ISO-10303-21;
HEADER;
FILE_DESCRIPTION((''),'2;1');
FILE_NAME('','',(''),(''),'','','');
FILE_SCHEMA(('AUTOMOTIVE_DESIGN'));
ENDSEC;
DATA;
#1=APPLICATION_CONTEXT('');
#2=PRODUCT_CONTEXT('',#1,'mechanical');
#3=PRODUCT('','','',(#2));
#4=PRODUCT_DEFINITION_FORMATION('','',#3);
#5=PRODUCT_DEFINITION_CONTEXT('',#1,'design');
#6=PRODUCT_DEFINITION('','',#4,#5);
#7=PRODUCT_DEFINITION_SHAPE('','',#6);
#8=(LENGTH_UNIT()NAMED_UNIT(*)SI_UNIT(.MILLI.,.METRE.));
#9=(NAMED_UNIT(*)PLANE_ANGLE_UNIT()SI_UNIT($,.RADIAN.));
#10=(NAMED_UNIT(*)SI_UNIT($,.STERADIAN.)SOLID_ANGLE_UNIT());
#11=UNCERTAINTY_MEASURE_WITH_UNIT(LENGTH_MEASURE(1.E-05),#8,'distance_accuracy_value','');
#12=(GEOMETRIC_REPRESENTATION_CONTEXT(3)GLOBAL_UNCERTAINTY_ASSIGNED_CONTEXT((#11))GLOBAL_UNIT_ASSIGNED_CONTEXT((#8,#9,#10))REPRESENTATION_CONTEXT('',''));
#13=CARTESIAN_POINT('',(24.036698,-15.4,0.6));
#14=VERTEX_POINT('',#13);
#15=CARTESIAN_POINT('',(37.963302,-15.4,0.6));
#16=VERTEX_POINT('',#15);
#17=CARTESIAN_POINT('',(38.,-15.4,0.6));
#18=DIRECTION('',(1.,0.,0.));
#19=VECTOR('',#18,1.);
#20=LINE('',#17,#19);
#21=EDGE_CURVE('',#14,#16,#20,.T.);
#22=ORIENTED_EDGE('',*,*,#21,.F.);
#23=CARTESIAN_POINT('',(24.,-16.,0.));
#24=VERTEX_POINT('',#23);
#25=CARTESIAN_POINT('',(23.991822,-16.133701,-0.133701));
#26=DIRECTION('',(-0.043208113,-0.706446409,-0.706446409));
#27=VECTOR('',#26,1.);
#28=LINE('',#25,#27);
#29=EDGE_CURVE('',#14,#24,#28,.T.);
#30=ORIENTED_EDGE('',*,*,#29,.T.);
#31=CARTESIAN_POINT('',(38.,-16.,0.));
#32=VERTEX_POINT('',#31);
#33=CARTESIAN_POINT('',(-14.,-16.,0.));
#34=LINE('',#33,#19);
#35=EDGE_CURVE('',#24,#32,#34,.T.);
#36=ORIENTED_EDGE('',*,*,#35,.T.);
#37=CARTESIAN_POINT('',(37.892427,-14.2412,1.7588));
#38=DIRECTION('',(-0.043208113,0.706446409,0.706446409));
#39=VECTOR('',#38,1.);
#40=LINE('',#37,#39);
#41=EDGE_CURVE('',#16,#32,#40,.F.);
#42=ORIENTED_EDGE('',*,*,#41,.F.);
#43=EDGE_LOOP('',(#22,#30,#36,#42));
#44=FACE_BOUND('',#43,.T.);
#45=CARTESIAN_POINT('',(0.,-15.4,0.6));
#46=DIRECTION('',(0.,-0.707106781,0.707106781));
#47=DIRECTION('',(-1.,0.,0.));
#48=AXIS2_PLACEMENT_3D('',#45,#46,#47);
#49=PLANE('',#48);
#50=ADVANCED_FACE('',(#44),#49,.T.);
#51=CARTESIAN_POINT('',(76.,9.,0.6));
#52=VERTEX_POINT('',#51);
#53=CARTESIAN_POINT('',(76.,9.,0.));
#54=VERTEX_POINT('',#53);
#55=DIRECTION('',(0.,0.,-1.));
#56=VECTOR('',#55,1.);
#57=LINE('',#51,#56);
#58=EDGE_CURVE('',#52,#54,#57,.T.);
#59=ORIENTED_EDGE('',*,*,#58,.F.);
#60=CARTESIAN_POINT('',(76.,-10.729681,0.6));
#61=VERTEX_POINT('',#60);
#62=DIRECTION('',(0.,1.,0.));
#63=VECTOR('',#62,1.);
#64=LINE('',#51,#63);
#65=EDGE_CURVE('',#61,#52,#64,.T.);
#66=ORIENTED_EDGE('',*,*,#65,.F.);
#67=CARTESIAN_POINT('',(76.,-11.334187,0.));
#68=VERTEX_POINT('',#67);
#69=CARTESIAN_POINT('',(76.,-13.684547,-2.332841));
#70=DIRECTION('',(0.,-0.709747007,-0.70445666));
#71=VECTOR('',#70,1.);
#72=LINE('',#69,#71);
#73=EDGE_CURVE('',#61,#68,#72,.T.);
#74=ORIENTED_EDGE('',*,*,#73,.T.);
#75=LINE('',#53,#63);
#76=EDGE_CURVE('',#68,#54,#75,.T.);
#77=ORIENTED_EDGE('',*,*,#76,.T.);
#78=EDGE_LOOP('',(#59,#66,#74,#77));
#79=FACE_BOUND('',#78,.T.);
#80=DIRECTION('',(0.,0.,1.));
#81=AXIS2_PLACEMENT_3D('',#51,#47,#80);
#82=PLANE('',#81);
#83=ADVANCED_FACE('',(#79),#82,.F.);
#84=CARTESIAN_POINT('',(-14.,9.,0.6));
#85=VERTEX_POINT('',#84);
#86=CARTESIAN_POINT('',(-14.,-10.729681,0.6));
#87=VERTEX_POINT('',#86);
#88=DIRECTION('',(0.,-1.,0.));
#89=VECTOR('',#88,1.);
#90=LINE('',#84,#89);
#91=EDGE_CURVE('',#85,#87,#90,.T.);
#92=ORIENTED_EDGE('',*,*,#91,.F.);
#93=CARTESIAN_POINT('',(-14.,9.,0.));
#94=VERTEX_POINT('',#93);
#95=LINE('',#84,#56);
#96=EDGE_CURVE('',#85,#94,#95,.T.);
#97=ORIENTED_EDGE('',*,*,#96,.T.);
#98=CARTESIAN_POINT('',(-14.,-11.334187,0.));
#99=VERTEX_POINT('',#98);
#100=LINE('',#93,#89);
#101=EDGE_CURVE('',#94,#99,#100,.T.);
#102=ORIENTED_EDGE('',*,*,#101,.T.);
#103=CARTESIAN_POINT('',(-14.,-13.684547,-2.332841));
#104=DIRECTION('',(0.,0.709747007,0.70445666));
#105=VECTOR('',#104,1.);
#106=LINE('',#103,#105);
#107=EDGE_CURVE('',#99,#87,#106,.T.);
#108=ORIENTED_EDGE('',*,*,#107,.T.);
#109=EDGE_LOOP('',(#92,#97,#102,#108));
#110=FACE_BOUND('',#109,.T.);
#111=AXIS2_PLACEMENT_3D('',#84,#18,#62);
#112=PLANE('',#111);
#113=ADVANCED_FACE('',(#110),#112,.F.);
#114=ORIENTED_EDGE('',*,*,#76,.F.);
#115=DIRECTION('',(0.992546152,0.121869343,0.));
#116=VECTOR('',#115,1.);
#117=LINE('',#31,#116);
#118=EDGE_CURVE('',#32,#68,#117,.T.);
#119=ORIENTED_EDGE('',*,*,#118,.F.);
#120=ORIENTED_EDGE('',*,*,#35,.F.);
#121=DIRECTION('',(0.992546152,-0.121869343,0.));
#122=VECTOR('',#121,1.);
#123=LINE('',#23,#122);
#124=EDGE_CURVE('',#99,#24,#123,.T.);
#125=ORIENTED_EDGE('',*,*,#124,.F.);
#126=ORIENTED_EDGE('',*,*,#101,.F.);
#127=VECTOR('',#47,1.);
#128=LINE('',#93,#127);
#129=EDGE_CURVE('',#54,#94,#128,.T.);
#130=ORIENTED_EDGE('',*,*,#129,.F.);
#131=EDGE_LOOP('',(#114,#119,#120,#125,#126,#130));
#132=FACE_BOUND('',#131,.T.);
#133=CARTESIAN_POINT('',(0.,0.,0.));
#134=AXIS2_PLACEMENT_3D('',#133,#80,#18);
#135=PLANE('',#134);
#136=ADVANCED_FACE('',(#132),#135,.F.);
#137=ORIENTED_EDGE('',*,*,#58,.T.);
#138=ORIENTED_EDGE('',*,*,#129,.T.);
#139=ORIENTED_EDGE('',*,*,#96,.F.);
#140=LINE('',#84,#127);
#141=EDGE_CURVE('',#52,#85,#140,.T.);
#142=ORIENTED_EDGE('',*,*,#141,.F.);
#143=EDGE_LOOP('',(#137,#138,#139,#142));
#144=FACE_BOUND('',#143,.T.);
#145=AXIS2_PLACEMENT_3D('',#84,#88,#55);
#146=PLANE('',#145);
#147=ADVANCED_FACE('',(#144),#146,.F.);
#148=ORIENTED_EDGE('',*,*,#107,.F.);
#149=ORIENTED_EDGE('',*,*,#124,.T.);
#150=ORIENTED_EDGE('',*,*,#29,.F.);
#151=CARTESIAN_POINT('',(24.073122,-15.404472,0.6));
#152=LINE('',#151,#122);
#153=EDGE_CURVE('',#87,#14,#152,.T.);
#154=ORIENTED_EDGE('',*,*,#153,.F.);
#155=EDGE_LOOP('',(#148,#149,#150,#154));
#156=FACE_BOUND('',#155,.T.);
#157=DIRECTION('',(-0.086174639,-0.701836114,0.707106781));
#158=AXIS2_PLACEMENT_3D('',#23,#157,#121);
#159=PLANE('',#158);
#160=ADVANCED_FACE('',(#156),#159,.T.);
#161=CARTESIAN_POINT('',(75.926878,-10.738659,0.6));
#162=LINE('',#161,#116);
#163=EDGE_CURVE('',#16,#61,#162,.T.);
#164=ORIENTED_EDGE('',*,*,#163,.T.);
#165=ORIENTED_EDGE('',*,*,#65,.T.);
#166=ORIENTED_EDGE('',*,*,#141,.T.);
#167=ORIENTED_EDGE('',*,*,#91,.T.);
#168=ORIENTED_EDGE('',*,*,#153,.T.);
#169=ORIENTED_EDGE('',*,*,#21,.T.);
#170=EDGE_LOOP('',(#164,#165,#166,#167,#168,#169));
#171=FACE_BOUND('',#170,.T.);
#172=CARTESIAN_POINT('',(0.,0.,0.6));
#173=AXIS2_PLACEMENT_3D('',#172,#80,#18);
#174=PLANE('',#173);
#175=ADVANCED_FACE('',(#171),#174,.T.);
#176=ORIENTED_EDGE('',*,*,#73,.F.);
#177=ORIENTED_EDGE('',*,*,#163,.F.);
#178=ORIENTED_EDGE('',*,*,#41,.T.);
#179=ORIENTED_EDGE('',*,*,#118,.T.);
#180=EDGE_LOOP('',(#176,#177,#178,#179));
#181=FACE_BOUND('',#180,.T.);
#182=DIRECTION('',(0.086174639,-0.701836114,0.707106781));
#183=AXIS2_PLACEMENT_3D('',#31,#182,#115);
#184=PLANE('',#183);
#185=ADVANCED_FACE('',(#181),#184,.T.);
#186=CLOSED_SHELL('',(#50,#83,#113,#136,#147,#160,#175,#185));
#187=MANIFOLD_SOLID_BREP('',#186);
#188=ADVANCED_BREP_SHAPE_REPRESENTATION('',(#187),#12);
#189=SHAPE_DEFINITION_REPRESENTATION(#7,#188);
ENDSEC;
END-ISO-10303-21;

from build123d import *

# Parameters (mm, degrees)
SKETCH_1_W          = 90
SKETCH_1_H          = 25
EXTRUDE_1_DEPTH     = 0.6
CUT_EXTRUDE_1_REACH = 79.668
CHAMFER_1_SIZE      = 0.6


with BuildPart() as part:
    # 草图1 → 凸台-拉伸1 (new body)
    with BuildSketch(Plane.XY):
        with Locations((31, -3.5)):
            Rectangle(SKETCH_1_W, SKETCH_1_H)
    extrude(amount=EXTRUDE_1_DEPTH)

    # 草图2 → 切除-拉伸1 (cut, up to next)
    with BuildSketch(Plane.XY.offset(0.6), mode=Mode.PRIVATE) as cut_extrude_1_sk1:
        Polygon((24, -16), (-14, -11.334186686), (-14, -16), align=None)
    cut_extrude_1_tool1 = extrude(cut_extrude_1_sk1.sketch, amount=-CUT_EXTRUDE_1_REACH, mode=Mode.PRIVATE) & part.part
    # 草图2 → 切除-拉伸1 (cut, up to next)
    with BuildSketch(Plane.XY.offset(0.6), mode=Mode.PRIVATE) as cut_extrude_1_sk2:
        Polygon((76, -11.334186686), (76, -16), (38, -16), align=None)
    cut_extrude_1_tool2 = extrude(cut_extrude_1_sk2.sketch, amount=-CUT_EXTRUDE_1_REACH, mode=Mode.PRIVATE) & part.part
    add(cut_extrude_1_tool1.solids().sort_by_distance((-1.333333, -14.444729, 0.6))[0], mode=Mode.SUBTRACT)
    add(cut_extrude_1_tool2.solids().sort_by_distance((63.333333, -14.444729, 0.6))[0], mode=Mode.SUBTRACT)

    # 倒角1
    chamfer_1_edges = [part.edges().sort_by_distance(p)[0] for p in [
        (57, -13.667093343, 0.6),
        (5, -13.667093343, 0.6),
        (31, -16, 0.6),
    ]]
    chamfer(chamfer_1_edges, length=CHAMFER_1_SIZE - 0.0001)  # a hair under: the kernel refuses the full size


solid = part.part
